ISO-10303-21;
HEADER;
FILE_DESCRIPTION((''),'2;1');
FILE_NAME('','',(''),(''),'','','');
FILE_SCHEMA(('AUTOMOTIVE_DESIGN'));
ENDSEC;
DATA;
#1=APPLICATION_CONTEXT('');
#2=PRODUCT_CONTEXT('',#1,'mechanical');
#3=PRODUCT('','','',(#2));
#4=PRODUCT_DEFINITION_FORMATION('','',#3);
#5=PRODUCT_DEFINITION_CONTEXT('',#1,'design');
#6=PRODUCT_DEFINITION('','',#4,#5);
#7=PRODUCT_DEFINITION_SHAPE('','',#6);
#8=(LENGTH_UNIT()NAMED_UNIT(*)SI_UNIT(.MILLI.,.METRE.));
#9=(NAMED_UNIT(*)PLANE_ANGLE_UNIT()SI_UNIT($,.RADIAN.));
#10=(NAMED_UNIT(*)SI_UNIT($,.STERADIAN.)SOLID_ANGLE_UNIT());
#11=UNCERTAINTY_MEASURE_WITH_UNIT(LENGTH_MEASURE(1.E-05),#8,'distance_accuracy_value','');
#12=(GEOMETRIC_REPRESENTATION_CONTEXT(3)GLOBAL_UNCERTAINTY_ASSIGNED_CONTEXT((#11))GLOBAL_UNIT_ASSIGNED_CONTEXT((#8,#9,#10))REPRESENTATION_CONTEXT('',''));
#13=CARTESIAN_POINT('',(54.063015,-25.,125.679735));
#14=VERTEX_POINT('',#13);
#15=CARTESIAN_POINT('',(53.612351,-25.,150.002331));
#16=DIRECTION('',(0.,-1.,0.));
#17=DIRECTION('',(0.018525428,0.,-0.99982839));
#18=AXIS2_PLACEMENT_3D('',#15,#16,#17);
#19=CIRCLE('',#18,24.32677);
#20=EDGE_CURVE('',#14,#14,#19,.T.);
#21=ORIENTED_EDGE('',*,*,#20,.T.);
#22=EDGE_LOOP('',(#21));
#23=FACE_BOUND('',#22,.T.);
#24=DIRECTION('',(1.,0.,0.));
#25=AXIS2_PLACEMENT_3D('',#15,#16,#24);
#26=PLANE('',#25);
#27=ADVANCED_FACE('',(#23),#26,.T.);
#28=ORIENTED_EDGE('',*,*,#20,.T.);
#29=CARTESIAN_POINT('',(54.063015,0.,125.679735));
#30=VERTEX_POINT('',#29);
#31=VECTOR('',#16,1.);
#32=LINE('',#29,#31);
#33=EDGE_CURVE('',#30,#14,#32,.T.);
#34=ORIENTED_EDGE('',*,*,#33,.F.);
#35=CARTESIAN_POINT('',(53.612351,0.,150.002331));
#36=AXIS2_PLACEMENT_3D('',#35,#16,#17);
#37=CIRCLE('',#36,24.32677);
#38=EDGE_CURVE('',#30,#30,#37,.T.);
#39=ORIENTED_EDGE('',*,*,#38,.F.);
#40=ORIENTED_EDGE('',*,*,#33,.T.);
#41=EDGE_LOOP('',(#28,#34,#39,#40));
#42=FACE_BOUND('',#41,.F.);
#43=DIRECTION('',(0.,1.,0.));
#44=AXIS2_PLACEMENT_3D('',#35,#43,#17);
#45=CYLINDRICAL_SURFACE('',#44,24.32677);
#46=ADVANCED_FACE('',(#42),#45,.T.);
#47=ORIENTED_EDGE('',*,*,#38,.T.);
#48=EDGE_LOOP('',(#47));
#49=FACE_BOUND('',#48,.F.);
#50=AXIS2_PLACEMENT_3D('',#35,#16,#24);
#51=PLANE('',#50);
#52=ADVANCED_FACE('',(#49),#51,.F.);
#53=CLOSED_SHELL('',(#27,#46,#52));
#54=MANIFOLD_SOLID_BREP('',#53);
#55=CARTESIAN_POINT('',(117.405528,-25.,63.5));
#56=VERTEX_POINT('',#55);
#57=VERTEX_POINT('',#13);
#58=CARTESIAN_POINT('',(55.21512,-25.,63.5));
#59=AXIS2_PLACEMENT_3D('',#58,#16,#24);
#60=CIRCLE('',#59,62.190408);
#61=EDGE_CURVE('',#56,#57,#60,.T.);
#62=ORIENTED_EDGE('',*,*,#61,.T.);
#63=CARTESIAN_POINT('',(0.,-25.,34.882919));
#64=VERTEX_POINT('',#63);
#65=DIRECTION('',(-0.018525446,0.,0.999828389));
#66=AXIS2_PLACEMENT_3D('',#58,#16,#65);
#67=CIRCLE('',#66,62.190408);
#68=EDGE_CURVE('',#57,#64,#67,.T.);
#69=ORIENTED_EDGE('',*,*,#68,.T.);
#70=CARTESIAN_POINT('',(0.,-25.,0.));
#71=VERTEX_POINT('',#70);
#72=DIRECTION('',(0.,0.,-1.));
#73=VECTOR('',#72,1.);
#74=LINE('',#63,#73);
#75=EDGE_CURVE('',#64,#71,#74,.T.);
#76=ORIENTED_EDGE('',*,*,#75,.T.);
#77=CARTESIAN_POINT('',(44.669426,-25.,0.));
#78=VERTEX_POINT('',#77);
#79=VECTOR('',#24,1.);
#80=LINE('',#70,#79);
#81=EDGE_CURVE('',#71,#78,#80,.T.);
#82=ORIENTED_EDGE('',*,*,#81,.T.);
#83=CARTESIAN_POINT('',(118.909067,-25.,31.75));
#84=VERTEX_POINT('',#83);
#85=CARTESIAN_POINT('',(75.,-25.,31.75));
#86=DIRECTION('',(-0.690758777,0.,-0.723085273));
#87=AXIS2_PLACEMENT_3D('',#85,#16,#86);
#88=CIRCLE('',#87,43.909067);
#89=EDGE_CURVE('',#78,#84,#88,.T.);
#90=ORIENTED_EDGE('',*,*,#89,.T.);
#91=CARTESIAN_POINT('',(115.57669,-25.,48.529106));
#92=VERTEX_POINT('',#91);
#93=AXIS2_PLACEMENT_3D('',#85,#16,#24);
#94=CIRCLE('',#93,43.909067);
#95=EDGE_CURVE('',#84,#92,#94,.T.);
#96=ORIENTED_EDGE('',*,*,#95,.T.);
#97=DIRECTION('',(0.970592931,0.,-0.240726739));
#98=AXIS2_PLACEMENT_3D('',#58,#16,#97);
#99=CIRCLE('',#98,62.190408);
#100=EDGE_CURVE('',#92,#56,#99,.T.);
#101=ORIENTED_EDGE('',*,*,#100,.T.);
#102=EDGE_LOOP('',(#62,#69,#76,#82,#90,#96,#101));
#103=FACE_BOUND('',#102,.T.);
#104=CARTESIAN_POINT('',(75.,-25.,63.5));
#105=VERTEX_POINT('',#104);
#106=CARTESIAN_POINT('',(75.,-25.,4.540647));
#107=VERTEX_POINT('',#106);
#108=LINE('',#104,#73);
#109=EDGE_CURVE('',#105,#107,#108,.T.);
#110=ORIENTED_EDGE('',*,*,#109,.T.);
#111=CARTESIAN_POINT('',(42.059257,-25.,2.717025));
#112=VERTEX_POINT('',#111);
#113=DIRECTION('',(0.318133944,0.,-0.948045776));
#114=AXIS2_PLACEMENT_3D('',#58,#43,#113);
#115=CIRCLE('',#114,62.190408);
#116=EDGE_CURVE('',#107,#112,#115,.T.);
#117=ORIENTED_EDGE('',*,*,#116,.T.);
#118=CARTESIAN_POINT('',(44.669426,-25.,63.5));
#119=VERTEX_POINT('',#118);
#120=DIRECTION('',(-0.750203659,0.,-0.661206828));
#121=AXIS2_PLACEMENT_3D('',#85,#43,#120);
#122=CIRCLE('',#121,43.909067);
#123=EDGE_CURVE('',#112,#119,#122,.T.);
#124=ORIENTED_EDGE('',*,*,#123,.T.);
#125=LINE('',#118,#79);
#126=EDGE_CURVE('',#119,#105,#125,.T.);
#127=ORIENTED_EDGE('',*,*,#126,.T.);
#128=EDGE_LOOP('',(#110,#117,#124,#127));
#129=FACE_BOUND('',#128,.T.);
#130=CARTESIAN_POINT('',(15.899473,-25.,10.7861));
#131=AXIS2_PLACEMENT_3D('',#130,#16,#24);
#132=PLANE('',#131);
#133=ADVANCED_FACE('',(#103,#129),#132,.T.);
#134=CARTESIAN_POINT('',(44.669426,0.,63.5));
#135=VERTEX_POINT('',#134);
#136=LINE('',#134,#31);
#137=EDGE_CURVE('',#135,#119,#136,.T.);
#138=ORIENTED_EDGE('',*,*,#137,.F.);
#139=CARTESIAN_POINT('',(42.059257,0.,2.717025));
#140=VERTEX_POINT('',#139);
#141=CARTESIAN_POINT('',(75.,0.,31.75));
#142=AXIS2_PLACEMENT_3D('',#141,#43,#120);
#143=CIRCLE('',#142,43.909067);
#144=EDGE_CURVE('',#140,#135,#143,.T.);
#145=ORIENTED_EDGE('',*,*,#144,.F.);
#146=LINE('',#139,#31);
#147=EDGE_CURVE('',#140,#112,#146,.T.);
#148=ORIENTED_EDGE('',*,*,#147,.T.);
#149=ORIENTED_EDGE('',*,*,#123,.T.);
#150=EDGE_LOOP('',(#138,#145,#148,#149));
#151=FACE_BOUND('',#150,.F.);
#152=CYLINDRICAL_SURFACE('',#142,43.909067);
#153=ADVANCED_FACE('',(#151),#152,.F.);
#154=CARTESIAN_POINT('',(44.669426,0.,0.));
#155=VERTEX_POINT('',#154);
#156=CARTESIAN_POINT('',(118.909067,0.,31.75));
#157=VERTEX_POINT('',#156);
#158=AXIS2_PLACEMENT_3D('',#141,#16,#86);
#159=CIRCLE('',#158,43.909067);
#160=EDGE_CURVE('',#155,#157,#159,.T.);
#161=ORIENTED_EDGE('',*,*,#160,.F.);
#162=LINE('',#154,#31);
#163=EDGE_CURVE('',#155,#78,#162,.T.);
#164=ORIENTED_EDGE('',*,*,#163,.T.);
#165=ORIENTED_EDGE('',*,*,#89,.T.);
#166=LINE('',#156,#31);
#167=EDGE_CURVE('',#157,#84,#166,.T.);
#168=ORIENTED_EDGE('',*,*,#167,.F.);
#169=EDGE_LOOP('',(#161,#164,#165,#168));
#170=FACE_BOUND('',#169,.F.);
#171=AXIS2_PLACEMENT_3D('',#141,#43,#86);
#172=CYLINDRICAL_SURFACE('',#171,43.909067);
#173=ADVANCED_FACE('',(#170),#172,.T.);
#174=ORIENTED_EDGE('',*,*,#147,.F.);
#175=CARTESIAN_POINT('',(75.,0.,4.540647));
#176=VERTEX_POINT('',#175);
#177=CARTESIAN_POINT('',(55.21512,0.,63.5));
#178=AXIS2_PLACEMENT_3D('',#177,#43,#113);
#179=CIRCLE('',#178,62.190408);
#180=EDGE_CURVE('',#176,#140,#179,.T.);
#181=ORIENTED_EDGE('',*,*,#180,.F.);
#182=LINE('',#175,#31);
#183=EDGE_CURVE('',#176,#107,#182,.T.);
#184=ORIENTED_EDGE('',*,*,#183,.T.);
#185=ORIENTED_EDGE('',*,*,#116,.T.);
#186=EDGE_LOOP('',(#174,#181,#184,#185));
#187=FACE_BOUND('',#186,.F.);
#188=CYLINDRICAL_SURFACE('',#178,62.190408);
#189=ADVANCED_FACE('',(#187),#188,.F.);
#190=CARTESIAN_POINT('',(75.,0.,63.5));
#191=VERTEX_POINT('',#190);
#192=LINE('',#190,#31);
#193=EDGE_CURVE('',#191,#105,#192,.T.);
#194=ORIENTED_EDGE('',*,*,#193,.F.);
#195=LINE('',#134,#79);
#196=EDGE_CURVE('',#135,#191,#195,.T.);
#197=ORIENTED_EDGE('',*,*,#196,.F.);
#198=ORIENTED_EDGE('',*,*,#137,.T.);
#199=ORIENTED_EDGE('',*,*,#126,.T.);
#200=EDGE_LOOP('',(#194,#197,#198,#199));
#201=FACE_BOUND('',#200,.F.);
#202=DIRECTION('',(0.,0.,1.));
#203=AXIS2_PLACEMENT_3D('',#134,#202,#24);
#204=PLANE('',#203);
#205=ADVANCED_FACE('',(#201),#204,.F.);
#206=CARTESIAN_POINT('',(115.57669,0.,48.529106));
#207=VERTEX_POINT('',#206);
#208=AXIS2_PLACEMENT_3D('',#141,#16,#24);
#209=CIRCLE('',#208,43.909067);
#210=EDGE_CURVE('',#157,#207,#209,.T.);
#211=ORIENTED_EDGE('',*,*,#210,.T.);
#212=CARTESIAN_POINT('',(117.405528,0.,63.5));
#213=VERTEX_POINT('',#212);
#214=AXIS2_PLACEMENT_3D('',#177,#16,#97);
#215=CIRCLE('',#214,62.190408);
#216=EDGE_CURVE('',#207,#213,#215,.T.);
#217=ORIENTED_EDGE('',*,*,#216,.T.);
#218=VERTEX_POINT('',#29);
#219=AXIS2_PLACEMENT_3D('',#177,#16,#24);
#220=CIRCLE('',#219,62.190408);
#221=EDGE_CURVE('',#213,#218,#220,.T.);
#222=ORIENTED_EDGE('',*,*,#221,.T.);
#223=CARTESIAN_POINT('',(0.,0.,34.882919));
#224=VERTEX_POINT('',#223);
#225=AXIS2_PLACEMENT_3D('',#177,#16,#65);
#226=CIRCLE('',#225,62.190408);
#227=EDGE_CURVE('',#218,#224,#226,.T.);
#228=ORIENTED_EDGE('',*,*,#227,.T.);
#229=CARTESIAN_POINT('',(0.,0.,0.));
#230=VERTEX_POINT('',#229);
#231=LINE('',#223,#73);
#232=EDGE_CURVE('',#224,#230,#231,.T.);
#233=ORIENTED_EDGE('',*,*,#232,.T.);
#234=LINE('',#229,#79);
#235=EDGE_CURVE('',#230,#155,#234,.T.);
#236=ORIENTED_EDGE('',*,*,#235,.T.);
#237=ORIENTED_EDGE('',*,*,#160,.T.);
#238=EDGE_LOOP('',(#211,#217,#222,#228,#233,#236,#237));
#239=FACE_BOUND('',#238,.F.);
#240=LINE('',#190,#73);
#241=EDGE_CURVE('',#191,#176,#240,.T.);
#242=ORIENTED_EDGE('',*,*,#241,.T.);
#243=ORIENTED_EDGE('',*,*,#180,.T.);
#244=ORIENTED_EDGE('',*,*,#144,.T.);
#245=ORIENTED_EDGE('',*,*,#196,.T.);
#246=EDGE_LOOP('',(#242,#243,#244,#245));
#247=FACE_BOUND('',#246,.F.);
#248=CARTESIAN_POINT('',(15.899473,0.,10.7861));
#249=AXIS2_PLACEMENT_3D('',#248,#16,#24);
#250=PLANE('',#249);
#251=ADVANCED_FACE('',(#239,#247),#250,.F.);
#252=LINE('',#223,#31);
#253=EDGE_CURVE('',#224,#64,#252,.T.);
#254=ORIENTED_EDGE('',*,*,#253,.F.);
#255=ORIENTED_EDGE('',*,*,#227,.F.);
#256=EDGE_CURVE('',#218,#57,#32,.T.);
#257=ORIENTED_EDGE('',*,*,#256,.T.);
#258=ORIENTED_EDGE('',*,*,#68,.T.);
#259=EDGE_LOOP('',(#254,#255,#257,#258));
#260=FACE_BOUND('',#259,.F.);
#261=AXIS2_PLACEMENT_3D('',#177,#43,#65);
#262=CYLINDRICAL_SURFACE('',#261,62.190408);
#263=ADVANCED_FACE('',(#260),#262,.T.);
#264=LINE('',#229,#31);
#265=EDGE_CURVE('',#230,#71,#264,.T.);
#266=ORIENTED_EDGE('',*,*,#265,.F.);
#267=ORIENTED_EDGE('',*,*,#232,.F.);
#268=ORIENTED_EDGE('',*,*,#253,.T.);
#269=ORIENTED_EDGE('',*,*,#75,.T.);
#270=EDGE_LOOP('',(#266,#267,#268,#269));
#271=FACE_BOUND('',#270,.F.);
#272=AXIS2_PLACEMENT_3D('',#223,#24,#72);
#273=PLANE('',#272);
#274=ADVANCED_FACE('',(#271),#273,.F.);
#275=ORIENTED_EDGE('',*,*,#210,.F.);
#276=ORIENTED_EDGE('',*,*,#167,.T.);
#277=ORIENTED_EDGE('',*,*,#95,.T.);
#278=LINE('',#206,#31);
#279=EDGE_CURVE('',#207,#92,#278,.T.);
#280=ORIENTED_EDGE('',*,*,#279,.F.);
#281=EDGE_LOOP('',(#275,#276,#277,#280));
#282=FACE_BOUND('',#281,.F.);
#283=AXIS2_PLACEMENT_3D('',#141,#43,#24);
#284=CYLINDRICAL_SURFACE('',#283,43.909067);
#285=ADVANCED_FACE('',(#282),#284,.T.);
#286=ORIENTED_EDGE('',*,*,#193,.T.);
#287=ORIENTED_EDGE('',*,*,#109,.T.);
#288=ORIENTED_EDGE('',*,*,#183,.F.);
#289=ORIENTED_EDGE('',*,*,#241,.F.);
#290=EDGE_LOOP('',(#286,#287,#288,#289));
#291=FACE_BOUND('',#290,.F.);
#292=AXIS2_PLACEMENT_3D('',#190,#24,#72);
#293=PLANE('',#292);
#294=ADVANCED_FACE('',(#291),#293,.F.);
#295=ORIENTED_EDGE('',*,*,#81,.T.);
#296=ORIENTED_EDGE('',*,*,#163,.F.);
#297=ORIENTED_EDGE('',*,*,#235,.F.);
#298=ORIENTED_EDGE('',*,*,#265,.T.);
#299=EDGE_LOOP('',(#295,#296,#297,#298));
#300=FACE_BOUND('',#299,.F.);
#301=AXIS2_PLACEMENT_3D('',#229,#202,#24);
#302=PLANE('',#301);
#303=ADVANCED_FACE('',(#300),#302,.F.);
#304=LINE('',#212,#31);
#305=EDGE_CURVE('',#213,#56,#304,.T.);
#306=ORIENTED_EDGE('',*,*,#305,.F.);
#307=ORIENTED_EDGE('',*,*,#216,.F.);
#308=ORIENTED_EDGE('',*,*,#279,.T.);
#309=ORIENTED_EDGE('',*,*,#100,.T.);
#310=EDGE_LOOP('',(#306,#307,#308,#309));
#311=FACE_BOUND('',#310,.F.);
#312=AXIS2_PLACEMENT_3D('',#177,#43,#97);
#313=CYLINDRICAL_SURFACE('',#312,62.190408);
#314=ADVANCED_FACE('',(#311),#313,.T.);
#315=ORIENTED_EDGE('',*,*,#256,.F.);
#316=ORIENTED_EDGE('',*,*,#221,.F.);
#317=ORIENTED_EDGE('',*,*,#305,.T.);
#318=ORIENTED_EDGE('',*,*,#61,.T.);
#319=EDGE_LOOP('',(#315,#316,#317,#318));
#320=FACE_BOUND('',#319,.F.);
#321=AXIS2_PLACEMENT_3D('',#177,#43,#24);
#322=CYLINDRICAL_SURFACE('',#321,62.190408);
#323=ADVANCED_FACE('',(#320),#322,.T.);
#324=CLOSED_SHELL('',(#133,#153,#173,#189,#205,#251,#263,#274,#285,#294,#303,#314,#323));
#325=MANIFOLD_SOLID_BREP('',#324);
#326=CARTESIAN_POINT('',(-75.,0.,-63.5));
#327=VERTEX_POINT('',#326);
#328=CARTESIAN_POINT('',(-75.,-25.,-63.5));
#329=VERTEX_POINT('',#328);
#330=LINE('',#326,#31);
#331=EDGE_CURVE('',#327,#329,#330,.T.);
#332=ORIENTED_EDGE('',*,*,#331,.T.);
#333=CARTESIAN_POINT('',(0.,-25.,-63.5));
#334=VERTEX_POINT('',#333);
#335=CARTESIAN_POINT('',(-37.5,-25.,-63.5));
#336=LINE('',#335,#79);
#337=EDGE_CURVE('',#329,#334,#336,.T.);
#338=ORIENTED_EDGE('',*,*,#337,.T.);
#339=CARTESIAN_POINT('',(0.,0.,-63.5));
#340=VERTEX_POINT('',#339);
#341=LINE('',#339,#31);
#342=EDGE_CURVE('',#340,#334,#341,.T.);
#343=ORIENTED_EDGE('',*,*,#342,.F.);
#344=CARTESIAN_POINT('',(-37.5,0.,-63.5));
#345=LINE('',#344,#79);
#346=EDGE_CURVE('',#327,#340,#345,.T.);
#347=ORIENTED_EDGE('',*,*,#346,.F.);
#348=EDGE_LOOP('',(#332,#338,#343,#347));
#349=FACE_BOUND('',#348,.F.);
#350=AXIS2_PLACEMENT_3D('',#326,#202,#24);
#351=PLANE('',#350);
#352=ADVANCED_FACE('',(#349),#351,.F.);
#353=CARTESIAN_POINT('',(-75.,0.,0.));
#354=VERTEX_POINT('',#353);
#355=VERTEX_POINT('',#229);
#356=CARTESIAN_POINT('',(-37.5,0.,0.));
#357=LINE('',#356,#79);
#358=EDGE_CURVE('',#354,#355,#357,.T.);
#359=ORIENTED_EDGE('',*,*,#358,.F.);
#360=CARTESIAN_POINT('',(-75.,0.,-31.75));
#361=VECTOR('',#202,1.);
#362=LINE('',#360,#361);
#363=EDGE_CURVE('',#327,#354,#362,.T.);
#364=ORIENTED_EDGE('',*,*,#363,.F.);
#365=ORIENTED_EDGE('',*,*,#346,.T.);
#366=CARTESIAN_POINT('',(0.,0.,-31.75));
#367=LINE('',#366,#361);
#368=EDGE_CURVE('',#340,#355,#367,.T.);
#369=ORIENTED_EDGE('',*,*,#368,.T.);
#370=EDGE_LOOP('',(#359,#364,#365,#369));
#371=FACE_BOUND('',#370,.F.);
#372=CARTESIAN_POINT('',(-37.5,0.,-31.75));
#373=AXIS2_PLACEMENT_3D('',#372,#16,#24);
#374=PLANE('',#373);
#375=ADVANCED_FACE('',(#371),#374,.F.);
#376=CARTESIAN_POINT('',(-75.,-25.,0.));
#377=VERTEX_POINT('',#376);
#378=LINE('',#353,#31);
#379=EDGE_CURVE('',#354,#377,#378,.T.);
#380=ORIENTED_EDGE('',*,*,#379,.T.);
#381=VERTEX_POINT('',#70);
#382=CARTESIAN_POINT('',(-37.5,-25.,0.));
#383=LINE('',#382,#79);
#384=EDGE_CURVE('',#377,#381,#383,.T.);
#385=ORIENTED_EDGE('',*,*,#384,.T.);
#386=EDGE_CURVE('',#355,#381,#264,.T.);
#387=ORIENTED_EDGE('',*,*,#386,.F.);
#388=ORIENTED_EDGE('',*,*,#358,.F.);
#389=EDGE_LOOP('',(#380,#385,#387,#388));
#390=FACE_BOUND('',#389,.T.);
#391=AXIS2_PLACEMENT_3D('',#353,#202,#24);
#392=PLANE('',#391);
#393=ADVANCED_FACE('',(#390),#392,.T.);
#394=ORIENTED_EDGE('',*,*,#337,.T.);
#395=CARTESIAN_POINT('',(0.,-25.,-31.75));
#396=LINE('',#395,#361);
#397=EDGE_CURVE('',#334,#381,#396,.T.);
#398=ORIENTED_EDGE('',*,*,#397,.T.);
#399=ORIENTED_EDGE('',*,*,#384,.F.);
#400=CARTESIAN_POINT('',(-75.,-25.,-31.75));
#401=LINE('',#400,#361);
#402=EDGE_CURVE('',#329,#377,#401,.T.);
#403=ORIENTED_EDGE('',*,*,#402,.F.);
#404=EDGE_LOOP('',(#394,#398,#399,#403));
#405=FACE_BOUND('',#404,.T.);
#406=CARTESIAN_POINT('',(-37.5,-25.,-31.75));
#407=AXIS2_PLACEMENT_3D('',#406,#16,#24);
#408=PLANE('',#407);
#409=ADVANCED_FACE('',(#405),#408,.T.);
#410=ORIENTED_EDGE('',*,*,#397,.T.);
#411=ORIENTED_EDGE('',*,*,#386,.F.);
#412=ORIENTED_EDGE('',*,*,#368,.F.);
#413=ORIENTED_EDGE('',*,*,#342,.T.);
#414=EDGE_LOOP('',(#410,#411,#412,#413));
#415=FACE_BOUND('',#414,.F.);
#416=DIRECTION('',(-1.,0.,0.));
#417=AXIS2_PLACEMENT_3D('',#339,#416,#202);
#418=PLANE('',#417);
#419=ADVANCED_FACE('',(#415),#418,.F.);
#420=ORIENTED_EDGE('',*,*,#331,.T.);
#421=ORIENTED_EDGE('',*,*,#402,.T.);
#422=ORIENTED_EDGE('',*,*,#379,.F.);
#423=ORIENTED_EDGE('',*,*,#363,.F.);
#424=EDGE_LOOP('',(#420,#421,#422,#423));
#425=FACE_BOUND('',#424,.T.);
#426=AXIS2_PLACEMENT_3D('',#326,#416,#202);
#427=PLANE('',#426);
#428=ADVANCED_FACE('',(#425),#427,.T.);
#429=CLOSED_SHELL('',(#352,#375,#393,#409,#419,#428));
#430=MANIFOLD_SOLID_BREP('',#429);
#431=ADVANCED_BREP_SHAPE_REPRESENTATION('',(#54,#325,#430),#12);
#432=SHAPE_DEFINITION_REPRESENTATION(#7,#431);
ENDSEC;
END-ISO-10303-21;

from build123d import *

# Parameters (mm, degrees)
F1_DEPTH = 25
F0_W     = 75
F0_H     = 63.5


with BuildPart() as f1:
    # F0 (on Front) → F1 (new body)
    with BuildSketch(Plane.XZ):
        with BuildLine():
            Line((0, 34.8829194066), (0, 0))
            Line((0, 0), (44.6694262963, 0))
            ThreePointArc((44.6694262963, 0), (43.3351861339, 1.3305035541), (42.0592569414, 2.7170248176))
            ThreePointArc((42.0592569414, 2.7170248176), (17.4353764526, 14.100225033), (0, 34.8829194066))
        make_face()
        with BuildLine():
            ThreePointArc((42.0592569414, 2.7170248176), (43.3351861339, 1.3305035541), (44.6694262963, 0))
            Line((44.6694262963, 0), (75, 0))
            Line((75, 0), (75, 4.5406466367))
            ThreePointArc((75, 4.5406466367), (58.6527595412, 1.4046744939), (42.0592569414, 2.7170248176))
        make_face()
        with BuildLine():
            Line((75, 0), (44.6694262963, 0))
            ThreePointArc((44.6694262963, 0), (92.2658477308, -8.6219791852), (118.9090674143, 31.75))
            ThreePointArc((118.9090674143, 31.75), (118.0679163411, 40.3034076971), (115.5766904116, 48.5291059488))
            ThreePointArc((115.5766904116, 48.5291059488), (100.9273669379, 21.3332201623), (75, 4.5406466367))
            Line((75, 4.5406466367), (75, 0))
        make_face()
        with BuildLine():
            ThreePointArc((54.0630152571, 125.6797351802), (1.7798186625, 95.3169035326), (0, 34.8829194066))
            Line((0, 34.8829194066), (0, 63.5))
            Line((0, 63.5), (44.6694262963, 63.5))
            ThreePointArc((44.6694262963, 63.5), (84.0707025125, 74.7119431256), (115.5766904116, 48.5291059488))
            ThreePointArc((115.5766904116, 48.5291059488), (116.9466255151, 55.9589073111), (117.4055280417, 63.5))
            ThreePointArc((117.4055280417, 63.5), (98.7811445192, 107.8807204565), (54.0630152571, 125.6797351802))
        make_face()
        with BuildLine():
            Line((0, 63.5), (0, 34.8829194066))
            ThreePointArc((0, 34.8829194066), (17.4353764526, 14.100225033), (42.0592569414, 2.7170248176))
            ThreePointArc((42.0592569414, 2.7170248176), (31.1313620086, 33.6338264198), (44.6694262963, 63.5))
            Line((44.6694262963, 63.5), (0, 63.5))
        make_face()
        with BuildLine():
            Line((75, 63.5), (75, 4.5406466367))
            ThreePointArc((75, 4.5406466367), (100.9273669379, 21.3332201623), (115.5766904116, 48.5291059488))
            ThreePointArc((115.5766904116, 48.5291059488), (84.0707025125, 74.7119431256), (44.6694262963, 63.5))
            Line((44.6694262963, 63.5), (75, 63.5))
        make_face()
    extrude(amount=F1_DEPTH)


with BuildPart() as f1b:
    # F0 (on Front) → F1, piece 2 (new body)
    with BuildSketch(Plane.XZ):
        with BuildLine():
            ThreePointArc((77.9391215075, 150.0023305416), (36.2521247684, 167.0438760613), (54.0630152571, 125.6797351802))
            ThreePointArc((54.0630152571, 125.6797351802), (70.9725780667, 132.9607850219), (77.9391215075, 150.0023305416))
        make_face()
    extrude(amount=F1_DEPTH)


with BuildPart() as f1c:
    # F0 (on Front) → F1, piece 3 (new body)
    with BuildSketch(Plane.XZ):
        with Locations((-37.5, -31.75)):
            Rectangle(F0_W, F0_H)
    extrude(amount=F1_DEPTH)


solid = Compound([f1.part, f1b.part, f1c.part])
